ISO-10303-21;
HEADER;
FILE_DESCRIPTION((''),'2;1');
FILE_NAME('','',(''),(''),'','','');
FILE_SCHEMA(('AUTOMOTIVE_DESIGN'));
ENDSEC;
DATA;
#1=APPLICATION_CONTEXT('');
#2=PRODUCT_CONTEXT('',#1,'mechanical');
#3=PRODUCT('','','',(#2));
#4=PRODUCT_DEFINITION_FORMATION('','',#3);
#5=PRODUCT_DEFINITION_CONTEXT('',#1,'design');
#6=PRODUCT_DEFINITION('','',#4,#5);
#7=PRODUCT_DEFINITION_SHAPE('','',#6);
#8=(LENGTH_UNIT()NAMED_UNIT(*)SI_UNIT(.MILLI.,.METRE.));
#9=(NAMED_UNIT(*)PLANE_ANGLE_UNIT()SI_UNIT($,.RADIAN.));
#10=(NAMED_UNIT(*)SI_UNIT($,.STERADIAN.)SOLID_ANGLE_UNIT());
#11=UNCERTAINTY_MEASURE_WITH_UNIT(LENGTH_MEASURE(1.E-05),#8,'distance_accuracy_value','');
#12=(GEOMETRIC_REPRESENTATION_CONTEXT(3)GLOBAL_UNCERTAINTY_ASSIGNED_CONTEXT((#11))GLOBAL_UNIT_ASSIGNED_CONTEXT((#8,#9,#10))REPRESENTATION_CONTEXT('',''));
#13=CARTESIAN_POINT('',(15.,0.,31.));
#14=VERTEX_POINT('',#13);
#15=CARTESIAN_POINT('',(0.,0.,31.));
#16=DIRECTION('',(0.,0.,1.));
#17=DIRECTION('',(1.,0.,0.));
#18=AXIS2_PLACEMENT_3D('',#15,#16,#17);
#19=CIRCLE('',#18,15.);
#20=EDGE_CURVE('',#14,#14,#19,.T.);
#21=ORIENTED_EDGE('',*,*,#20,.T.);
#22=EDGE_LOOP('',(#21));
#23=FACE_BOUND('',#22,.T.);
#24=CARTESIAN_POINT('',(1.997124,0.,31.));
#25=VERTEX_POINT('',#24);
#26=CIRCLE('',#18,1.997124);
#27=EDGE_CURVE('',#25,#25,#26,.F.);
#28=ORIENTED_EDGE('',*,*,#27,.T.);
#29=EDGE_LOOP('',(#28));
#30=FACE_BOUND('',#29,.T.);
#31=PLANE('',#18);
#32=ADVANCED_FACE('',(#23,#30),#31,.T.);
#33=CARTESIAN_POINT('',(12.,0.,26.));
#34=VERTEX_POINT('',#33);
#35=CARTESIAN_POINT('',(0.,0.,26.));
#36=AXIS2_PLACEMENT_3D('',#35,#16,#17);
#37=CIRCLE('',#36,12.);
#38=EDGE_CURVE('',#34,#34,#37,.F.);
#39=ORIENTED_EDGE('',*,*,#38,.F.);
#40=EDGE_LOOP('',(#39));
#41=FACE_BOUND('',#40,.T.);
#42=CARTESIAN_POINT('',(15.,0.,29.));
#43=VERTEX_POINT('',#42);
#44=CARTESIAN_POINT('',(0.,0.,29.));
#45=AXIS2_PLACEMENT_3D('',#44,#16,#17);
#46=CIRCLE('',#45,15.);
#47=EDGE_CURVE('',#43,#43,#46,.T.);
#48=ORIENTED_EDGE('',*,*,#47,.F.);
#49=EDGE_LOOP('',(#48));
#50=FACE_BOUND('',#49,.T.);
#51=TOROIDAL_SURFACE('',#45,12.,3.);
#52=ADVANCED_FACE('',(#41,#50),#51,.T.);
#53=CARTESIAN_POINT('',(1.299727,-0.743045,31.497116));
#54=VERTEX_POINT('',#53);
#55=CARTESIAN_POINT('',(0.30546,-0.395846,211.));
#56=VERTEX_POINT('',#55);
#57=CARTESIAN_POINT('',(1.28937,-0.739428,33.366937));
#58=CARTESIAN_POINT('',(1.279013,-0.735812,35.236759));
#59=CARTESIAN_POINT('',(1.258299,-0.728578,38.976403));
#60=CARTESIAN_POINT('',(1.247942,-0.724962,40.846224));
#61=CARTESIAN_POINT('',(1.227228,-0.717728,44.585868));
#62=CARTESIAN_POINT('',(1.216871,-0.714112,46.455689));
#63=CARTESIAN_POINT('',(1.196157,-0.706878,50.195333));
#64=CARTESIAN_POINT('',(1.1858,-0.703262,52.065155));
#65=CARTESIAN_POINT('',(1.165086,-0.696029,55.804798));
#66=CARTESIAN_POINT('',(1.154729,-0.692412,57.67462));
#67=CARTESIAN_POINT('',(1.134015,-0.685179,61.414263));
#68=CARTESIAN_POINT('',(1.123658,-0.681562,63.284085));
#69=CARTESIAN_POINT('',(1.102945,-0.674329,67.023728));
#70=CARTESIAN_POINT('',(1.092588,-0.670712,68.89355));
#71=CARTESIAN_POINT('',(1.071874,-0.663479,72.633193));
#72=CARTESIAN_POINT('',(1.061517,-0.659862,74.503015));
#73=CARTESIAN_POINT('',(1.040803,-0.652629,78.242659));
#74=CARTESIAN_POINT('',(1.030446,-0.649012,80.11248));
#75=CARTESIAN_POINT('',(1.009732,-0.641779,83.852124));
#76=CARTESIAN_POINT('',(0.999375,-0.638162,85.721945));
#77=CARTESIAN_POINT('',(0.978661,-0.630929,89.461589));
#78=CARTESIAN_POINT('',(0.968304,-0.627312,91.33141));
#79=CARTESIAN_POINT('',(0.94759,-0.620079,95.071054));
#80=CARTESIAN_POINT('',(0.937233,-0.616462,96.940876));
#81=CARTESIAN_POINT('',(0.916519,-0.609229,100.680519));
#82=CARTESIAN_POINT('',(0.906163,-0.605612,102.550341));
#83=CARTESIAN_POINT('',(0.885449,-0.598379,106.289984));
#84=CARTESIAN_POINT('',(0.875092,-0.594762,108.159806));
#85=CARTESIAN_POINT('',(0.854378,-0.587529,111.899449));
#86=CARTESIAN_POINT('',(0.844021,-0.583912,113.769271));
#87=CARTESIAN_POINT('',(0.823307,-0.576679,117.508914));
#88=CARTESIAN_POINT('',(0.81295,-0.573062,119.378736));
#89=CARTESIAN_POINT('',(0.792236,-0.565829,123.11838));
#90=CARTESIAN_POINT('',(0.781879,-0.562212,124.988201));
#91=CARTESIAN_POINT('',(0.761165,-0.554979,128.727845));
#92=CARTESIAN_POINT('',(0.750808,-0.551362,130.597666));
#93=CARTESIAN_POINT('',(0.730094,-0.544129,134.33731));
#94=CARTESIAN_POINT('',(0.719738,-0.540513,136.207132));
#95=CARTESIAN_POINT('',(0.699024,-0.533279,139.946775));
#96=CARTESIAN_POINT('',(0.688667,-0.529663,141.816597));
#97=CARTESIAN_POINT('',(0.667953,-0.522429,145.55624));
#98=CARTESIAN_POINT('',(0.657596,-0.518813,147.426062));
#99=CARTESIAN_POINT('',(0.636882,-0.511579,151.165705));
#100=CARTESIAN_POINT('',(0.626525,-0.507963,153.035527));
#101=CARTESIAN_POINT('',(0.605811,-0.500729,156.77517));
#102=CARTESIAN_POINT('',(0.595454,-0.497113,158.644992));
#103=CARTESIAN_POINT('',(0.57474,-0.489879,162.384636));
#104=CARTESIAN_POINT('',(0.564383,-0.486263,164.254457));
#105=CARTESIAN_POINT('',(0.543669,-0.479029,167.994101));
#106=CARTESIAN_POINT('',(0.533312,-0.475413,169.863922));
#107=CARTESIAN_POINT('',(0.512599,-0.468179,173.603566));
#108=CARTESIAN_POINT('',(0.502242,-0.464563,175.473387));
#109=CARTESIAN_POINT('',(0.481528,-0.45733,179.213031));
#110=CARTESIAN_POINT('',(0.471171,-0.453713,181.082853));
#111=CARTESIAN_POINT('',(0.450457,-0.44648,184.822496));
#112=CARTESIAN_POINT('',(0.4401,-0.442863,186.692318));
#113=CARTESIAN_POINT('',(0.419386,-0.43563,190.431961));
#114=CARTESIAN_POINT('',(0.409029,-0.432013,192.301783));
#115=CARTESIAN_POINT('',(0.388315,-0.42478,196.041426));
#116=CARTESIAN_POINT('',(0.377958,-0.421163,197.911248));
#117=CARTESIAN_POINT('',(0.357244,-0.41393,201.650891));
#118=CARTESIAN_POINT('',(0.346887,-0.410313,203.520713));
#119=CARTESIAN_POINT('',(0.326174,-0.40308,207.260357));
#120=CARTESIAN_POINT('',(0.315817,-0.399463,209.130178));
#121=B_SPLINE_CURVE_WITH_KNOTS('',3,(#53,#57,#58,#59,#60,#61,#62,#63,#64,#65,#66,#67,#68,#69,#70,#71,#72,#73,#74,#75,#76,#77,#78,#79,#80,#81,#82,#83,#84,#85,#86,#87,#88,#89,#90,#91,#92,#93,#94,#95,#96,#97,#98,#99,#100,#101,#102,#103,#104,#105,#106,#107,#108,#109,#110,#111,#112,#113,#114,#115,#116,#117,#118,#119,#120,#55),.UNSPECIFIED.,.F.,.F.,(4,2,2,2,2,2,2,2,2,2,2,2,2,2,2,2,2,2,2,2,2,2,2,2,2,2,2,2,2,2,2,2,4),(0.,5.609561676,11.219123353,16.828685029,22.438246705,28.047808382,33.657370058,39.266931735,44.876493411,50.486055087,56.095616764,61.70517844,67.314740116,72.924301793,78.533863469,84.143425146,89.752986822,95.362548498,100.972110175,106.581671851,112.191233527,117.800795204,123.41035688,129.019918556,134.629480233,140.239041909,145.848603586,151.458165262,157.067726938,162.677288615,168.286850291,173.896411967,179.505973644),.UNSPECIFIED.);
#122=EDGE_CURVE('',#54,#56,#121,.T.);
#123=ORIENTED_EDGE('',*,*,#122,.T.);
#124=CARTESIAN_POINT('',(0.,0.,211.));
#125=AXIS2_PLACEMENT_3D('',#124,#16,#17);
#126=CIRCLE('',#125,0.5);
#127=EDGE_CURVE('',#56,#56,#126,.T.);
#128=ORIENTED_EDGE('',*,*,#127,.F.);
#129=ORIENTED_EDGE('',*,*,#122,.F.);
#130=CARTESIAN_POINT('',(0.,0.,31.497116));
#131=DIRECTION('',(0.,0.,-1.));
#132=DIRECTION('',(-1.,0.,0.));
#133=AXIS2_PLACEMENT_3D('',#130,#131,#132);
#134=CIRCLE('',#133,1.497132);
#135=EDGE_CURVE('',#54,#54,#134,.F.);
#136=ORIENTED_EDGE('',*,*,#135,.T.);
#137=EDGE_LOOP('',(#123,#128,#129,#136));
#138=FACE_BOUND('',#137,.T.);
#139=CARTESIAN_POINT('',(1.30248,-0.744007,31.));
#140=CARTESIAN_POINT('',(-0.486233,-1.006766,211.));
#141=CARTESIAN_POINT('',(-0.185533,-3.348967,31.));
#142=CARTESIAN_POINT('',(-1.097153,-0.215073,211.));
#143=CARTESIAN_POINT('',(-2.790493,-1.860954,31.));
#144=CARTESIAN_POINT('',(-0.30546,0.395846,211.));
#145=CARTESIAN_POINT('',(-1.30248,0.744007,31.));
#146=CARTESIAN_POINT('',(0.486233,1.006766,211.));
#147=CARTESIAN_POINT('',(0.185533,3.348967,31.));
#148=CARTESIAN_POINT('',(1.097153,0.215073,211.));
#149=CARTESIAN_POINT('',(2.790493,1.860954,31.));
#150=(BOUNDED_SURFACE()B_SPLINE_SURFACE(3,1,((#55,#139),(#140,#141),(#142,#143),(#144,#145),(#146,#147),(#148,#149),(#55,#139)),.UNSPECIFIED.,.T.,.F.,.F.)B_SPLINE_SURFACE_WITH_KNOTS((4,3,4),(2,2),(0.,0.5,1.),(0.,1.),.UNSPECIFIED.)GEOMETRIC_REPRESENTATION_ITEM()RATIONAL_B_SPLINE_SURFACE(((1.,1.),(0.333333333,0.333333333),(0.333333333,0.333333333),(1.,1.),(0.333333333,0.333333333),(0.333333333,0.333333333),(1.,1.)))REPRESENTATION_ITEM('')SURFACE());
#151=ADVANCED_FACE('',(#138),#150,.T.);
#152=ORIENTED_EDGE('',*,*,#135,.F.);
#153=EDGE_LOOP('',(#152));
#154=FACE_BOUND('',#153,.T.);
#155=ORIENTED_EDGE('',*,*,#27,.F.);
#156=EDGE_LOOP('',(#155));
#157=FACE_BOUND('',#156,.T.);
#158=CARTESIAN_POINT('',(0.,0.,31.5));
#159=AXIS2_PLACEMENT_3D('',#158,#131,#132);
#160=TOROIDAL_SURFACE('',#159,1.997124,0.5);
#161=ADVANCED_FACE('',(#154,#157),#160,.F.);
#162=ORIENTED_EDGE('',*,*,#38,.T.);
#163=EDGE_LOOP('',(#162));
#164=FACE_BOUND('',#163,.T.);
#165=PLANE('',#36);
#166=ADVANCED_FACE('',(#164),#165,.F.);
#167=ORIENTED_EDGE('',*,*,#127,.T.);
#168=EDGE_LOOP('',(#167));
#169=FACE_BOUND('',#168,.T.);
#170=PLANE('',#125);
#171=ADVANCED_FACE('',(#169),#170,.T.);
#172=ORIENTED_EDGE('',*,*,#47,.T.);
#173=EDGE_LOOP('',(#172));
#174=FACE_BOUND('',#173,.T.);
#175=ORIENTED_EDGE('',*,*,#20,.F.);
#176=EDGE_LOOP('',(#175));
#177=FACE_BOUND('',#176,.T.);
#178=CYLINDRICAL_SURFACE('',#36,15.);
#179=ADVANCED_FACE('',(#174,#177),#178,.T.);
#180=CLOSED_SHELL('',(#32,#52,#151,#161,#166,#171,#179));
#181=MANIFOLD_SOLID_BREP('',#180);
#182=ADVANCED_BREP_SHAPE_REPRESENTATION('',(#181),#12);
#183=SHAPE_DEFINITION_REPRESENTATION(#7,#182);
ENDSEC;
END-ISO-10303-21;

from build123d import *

# Parameters (mm, degrees)
SKETCH8_R           = 15
BOSS_EXTRUDE1_DEPTH = 5
FILLET1_R           = 3
FILLET2_R           = 0.5


with BuildPart() as part:
    # Loft1: read off the stored shape, not the designer's step
    # Loft1: loft between two sections, ruled curve by curve
    loft1_from = [
        Edge.make_bspline([(0.305459622, -0.395846459, 211), (-0.486233297, -1.006765703, 211), (-1.097152541, -0.215072785, 211), (-0.305459622, 0.395846459, 211), (0.486233297, 1.006765703, 211), (1.097152541, 0.215072785, 211), (0.305459622, -0.395846459, 211)], [0, 0, 0, 0, 0.5, 0.5, 0.5, 1, 1, 1, 1], 3, [1, 0.333333333, 0.333333333, 1, 0.333333333, 0.333333333, 1]),
    ]
    loft1_to = [
        Edge.make_bspline([(1.302480056, -0.744006522, 31), (-0.185532988, -3.348966633, 31), (-2.790493099, -1.86095359, 31), (-1.302480056, 0.744006522, 31), (0.185532988, 3.348966633, 31), (2.790493099, 1.86095359, 31), (1.302480056, -0.744006522, 31)], [0, 0, 0, 0, 0.5, 0.5, 0.5, 1, 1, 1, 1], 3, [1, 0.333333333, 0.333333333, 1, 0.333333333, 0.333333333, 1]),
    ]
    loft1 = Solid(Shell([*[Face.make_surface_from_curves(loft1_from[k], loft1_to[k]) for k in range(1)], Face(Wire(loft1_from)), Face(Wire(loft1_to))]))
    add(loft1)

    # Sketch8 → Boss-Extrude1 (add)
    with BuildSketch(Plane.XY.offset(31)):
        Circle(SKETCH8_R)
    extrude(amount=-BOSS_EXTRUDE1_DEPTH)

    # Fillet1
    fillet1_edges = [part.edges().sort_by_distance(p)[0] for p in [
        (-15, 0, 26),
    ]]
    fillet(fillet1_edges, radius=FILLET1_R)

    # Fillet2
    fillet2_edges = [part.edges().sort_by_distance(p)[0] for p in [
        (-1.302480056, 0.744006522, 31),
    ]]
    fillet(fillet2_edges, radius=FILLET2_R)


solid = part.part
